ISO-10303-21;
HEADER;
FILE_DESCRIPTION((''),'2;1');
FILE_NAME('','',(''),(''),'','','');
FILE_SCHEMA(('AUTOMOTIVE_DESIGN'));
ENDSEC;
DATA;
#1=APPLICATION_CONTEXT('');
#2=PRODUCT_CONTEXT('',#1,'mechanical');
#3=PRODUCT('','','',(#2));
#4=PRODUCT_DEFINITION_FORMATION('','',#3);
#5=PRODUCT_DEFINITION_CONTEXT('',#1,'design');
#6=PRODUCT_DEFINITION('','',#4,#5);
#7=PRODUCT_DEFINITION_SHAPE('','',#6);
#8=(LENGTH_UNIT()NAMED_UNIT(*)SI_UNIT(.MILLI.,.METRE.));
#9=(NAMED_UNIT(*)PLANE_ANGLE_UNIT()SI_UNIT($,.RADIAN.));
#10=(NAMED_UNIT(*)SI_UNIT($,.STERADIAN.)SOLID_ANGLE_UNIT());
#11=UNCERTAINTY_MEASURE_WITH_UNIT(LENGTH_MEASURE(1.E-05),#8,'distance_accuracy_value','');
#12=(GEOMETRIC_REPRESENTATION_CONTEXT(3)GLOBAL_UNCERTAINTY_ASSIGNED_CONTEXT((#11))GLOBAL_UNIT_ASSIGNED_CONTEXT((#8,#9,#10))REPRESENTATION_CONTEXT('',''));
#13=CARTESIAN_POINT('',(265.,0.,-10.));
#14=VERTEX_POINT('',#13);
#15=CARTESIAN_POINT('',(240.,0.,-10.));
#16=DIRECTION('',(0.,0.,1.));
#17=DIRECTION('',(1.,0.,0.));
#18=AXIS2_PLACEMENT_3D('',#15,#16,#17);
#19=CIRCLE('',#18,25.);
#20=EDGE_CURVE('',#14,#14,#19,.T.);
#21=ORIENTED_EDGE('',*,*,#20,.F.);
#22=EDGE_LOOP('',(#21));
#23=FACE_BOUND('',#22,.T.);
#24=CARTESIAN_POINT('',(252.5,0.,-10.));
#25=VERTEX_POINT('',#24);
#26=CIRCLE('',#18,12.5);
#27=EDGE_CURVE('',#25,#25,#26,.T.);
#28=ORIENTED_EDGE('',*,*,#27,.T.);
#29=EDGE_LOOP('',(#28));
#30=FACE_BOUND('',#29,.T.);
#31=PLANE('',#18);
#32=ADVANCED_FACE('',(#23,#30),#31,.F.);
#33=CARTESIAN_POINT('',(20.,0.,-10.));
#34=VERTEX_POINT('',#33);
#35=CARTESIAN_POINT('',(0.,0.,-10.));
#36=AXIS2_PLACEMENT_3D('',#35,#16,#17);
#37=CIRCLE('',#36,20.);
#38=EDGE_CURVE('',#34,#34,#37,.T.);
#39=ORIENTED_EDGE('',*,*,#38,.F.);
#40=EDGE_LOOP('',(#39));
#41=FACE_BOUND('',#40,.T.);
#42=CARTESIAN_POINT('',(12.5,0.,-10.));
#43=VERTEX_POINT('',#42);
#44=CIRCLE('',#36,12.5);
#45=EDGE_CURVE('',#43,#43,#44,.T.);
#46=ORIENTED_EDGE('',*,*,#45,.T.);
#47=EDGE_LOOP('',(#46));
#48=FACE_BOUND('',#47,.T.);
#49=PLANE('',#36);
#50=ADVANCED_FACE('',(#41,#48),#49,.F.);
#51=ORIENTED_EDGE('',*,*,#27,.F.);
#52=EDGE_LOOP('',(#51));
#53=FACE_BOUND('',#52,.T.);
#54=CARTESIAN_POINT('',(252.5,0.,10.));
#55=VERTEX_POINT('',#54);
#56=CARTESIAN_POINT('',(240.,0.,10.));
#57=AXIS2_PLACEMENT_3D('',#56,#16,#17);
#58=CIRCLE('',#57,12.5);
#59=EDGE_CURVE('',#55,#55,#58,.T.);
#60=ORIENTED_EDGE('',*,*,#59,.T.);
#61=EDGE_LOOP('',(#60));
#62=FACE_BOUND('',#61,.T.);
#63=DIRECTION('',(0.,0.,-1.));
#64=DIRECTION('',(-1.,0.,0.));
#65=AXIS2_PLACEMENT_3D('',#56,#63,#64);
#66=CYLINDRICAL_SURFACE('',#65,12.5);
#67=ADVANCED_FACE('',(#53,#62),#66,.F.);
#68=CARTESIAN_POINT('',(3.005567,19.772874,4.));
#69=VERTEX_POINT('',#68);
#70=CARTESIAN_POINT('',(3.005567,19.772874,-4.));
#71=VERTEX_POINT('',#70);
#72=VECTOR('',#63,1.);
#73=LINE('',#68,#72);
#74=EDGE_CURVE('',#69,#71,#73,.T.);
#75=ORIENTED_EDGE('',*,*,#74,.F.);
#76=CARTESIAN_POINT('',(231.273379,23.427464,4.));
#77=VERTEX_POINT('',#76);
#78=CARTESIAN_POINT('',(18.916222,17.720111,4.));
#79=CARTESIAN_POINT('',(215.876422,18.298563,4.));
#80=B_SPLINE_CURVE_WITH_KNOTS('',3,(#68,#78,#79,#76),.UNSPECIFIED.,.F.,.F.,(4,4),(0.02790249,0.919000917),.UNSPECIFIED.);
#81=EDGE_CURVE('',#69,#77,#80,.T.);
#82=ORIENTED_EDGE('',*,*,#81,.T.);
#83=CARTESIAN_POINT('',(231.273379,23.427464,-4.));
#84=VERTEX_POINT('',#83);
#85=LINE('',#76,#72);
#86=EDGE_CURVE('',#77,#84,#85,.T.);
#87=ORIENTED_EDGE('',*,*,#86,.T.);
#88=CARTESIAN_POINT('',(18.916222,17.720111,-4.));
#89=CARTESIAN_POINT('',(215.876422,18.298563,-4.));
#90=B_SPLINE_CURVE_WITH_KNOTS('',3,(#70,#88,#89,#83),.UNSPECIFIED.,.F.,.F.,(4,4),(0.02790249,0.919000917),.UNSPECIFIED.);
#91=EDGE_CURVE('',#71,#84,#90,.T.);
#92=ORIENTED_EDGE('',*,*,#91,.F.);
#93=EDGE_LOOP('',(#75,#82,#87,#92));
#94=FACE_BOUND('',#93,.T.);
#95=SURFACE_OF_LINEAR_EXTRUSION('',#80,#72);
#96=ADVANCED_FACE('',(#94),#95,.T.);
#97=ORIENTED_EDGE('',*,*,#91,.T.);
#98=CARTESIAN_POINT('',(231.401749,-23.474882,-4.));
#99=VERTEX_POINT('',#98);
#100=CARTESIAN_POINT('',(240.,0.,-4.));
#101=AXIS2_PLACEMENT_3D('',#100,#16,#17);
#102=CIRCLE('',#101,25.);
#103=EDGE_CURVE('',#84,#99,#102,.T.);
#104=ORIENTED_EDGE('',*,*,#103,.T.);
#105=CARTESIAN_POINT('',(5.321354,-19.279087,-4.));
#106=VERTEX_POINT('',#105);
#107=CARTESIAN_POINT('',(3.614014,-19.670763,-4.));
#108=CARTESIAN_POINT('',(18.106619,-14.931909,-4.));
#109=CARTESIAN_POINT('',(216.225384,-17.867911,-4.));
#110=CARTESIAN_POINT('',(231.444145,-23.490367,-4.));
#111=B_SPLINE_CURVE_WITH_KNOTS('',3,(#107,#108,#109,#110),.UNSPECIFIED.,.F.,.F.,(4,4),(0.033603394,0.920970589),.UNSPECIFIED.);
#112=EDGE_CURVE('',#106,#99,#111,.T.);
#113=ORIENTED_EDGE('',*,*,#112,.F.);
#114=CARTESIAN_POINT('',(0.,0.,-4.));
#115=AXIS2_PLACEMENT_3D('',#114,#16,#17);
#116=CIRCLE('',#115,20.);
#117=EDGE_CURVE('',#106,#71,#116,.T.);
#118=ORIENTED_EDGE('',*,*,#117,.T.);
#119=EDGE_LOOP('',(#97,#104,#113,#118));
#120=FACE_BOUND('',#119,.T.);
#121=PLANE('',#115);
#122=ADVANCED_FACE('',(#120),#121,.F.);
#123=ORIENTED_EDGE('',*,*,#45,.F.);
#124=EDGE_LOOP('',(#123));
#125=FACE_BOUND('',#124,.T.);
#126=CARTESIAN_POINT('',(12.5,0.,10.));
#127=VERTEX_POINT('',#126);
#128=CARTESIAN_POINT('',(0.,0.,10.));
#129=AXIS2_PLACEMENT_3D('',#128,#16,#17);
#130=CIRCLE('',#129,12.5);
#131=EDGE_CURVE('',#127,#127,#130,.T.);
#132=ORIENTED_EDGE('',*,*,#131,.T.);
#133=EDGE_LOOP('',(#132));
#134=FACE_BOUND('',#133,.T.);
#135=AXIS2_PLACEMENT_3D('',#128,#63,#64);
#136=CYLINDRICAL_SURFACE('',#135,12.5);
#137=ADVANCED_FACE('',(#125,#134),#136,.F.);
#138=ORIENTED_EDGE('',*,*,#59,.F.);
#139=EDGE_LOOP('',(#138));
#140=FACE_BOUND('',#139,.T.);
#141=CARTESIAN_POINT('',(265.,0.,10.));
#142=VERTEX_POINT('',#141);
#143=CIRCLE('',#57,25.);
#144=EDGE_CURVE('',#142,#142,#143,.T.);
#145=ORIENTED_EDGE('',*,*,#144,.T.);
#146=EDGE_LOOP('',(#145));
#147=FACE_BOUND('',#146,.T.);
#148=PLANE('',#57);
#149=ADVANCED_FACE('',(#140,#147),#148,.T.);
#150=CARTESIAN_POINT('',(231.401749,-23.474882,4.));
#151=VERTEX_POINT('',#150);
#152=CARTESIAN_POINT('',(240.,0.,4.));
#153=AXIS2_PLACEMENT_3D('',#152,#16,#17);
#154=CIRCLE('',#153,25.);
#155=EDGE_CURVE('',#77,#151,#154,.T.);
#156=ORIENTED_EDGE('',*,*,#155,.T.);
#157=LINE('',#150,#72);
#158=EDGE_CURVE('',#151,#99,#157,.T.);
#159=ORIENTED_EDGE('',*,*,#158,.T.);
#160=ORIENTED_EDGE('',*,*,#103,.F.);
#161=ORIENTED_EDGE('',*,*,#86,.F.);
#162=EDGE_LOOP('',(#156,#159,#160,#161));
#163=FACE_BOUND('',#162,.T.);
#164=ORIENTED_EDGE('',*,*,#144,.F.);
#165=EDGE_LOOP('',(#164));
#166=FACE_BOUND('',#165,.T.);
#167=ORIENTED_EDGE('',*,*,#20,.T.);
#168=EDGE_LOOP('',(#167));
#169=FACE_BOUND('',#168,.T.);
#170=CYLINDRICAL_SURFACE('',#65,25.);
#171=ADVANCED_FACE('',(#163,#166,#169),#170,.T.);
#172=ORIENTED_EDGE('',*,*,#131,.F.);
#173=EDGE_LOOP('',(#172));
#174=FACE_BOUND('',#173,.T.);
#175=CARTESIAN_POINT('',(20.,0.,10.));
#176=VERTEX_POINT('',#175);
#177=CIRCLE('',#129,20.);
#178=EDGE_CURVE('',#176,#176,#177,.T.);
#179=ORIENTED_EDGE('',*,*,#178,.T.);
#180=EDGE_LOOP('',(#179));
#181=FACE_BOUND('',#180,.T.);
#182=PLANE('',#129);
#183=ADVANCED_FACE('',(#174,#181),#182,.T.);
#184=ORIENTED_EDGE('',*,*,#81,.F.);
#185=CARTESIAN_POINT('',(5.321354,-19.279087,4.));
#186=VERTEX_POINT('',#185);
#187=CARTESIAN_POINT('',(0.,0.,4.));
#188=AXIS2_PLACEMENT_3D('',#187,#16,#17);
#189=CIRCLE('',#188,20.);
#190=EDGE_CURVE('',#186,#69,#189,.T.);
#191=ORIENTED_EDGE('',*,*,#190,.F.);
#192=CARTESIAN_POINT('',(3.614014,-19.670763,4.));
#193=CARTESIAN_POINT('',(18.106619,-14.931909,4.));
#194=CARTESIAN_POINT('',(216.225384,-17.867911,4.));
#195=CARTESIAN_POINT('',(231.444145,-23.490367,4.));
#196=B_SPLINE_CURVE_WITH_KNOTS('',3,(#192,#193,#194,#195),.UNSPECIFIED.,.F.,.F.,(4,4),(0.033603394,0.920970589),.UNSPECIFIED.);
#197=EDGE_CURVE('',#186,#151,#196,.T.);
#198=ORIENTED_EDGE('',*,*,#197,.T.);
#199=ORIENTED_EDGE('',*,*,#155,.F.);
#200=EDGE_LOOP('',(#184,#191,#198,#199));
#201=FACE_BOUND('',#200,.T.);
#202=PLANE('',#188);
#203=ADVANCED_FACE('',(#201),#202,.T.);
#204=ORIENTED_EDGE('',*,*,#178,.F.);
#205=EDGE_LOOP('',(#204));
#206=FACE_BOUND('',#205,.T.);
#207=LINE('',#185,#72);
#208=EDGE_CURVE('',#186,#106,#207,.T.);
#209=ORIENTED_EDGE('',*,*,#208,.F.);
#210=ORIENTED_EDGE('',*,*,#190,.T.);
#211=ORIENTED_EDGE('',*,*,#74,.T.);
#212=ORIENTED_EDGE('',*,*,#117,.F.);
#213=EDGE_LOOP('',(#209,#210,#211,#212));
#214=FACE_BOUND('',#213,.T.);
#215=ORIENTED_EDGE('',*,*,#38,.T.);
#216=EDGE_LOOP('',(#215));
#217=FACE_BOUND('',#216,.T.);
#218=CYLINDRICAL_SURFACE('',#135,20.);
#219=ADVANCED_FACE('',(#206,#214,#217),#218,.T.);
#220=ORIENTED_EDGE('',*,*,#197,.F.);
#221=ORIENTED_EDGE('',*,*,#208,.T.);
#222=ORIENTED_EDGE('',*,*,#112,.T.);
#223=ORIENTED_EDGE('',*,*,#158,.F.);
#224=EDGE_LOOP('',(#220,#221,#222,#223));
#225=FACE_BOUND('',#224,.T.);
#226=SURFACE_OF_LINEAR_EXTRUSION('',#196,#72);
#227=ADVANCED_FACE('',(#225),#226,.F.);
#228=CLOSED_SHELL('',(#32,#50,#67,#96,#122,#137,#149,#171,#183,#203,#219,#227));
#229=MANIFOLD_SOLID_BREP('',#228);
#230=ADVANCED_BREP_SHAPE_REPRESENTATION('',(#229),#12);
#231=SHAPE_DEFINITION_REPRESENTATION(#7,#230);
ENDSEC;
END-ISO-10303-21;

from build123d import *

# Parameters (mm, degrees)
BOSS_EXTRUDE1_START = -4
BOSS_EXTRUDE1_DEPTH = 8
SKETCH4_R           = 20
SKETCH4_R_2         = 12.5
SKETCH4_R_3         = 25
BOSS_EXTRUDE5_DEPTH = 10


# Read off the part's stored shape, not the designer's step: Boss-Extrude1
with BuildPart() as part:
    # Boss-Extrude1 outline → Boss-Extrude1 (new body)
    with BuildSketch(Plane.XY.offset(BOSS_EXTRUDE1_START)):
        with BuildLine():
            add(Edge.make_bspline(
                [(3.005567425, 19.772874461), (18.916222227, 17.720110762), (215.876421889, 18.298562521), (231.273379323, 23.427464471)],
                knots=[0.02790249, 0.02790249, 0.02790249, 0.02790249, 0.919000917, 0.919000917, 0.919000917, 0.919000917], degree=3))
            ThreePointArc((3.005567425, 19.772874461), (19.964927421, 1.183922747), (5.321353729, -19.279086973))
            add(Edge.make_bspline(
                [(5.321353729, -19.279086973), (29.380163277, -15.107768003), (216.311047881, -18.024838758), (231.401749268, -23.474881988)],
                knots=[0.059243279, 0.059243279, 0.059243279, 0.059243279, 0.920155583, 0.920155583, 0.920155583, 0.920155583], degree=3))
            ThreePointArc((231.401749268, -23.474881988), (215.000093636, -0.068423797), (231.273379323, 23.427464471))
        make_face()
    extrude(amount=BOSS_EXTRUDE1_DEPTH)

    # Sketch4 → Boss-Extrude5 (add, symmetric)
    # profile 1 of 2: a face of its own
    with BuildSketch(Plane.XY):
        Circle(SKETCH4_R)
        Circle(SKETCH4_R_2, mode=Mode.SUBTRACT)
    # profile 2 of 2: a face of its own
    with BuildSketch(Plane.XY):
        with Locations((240, 0)):
            Circle(SKETCH4_R_3)
        with Locations((240, 0)):
            Circle(SKETCH4_R_2, mode=Mode.SUBTRACT)
    extrude(amount=BOSS_EXTRUDE5_DEPTH, both=True)


solid = part.part
